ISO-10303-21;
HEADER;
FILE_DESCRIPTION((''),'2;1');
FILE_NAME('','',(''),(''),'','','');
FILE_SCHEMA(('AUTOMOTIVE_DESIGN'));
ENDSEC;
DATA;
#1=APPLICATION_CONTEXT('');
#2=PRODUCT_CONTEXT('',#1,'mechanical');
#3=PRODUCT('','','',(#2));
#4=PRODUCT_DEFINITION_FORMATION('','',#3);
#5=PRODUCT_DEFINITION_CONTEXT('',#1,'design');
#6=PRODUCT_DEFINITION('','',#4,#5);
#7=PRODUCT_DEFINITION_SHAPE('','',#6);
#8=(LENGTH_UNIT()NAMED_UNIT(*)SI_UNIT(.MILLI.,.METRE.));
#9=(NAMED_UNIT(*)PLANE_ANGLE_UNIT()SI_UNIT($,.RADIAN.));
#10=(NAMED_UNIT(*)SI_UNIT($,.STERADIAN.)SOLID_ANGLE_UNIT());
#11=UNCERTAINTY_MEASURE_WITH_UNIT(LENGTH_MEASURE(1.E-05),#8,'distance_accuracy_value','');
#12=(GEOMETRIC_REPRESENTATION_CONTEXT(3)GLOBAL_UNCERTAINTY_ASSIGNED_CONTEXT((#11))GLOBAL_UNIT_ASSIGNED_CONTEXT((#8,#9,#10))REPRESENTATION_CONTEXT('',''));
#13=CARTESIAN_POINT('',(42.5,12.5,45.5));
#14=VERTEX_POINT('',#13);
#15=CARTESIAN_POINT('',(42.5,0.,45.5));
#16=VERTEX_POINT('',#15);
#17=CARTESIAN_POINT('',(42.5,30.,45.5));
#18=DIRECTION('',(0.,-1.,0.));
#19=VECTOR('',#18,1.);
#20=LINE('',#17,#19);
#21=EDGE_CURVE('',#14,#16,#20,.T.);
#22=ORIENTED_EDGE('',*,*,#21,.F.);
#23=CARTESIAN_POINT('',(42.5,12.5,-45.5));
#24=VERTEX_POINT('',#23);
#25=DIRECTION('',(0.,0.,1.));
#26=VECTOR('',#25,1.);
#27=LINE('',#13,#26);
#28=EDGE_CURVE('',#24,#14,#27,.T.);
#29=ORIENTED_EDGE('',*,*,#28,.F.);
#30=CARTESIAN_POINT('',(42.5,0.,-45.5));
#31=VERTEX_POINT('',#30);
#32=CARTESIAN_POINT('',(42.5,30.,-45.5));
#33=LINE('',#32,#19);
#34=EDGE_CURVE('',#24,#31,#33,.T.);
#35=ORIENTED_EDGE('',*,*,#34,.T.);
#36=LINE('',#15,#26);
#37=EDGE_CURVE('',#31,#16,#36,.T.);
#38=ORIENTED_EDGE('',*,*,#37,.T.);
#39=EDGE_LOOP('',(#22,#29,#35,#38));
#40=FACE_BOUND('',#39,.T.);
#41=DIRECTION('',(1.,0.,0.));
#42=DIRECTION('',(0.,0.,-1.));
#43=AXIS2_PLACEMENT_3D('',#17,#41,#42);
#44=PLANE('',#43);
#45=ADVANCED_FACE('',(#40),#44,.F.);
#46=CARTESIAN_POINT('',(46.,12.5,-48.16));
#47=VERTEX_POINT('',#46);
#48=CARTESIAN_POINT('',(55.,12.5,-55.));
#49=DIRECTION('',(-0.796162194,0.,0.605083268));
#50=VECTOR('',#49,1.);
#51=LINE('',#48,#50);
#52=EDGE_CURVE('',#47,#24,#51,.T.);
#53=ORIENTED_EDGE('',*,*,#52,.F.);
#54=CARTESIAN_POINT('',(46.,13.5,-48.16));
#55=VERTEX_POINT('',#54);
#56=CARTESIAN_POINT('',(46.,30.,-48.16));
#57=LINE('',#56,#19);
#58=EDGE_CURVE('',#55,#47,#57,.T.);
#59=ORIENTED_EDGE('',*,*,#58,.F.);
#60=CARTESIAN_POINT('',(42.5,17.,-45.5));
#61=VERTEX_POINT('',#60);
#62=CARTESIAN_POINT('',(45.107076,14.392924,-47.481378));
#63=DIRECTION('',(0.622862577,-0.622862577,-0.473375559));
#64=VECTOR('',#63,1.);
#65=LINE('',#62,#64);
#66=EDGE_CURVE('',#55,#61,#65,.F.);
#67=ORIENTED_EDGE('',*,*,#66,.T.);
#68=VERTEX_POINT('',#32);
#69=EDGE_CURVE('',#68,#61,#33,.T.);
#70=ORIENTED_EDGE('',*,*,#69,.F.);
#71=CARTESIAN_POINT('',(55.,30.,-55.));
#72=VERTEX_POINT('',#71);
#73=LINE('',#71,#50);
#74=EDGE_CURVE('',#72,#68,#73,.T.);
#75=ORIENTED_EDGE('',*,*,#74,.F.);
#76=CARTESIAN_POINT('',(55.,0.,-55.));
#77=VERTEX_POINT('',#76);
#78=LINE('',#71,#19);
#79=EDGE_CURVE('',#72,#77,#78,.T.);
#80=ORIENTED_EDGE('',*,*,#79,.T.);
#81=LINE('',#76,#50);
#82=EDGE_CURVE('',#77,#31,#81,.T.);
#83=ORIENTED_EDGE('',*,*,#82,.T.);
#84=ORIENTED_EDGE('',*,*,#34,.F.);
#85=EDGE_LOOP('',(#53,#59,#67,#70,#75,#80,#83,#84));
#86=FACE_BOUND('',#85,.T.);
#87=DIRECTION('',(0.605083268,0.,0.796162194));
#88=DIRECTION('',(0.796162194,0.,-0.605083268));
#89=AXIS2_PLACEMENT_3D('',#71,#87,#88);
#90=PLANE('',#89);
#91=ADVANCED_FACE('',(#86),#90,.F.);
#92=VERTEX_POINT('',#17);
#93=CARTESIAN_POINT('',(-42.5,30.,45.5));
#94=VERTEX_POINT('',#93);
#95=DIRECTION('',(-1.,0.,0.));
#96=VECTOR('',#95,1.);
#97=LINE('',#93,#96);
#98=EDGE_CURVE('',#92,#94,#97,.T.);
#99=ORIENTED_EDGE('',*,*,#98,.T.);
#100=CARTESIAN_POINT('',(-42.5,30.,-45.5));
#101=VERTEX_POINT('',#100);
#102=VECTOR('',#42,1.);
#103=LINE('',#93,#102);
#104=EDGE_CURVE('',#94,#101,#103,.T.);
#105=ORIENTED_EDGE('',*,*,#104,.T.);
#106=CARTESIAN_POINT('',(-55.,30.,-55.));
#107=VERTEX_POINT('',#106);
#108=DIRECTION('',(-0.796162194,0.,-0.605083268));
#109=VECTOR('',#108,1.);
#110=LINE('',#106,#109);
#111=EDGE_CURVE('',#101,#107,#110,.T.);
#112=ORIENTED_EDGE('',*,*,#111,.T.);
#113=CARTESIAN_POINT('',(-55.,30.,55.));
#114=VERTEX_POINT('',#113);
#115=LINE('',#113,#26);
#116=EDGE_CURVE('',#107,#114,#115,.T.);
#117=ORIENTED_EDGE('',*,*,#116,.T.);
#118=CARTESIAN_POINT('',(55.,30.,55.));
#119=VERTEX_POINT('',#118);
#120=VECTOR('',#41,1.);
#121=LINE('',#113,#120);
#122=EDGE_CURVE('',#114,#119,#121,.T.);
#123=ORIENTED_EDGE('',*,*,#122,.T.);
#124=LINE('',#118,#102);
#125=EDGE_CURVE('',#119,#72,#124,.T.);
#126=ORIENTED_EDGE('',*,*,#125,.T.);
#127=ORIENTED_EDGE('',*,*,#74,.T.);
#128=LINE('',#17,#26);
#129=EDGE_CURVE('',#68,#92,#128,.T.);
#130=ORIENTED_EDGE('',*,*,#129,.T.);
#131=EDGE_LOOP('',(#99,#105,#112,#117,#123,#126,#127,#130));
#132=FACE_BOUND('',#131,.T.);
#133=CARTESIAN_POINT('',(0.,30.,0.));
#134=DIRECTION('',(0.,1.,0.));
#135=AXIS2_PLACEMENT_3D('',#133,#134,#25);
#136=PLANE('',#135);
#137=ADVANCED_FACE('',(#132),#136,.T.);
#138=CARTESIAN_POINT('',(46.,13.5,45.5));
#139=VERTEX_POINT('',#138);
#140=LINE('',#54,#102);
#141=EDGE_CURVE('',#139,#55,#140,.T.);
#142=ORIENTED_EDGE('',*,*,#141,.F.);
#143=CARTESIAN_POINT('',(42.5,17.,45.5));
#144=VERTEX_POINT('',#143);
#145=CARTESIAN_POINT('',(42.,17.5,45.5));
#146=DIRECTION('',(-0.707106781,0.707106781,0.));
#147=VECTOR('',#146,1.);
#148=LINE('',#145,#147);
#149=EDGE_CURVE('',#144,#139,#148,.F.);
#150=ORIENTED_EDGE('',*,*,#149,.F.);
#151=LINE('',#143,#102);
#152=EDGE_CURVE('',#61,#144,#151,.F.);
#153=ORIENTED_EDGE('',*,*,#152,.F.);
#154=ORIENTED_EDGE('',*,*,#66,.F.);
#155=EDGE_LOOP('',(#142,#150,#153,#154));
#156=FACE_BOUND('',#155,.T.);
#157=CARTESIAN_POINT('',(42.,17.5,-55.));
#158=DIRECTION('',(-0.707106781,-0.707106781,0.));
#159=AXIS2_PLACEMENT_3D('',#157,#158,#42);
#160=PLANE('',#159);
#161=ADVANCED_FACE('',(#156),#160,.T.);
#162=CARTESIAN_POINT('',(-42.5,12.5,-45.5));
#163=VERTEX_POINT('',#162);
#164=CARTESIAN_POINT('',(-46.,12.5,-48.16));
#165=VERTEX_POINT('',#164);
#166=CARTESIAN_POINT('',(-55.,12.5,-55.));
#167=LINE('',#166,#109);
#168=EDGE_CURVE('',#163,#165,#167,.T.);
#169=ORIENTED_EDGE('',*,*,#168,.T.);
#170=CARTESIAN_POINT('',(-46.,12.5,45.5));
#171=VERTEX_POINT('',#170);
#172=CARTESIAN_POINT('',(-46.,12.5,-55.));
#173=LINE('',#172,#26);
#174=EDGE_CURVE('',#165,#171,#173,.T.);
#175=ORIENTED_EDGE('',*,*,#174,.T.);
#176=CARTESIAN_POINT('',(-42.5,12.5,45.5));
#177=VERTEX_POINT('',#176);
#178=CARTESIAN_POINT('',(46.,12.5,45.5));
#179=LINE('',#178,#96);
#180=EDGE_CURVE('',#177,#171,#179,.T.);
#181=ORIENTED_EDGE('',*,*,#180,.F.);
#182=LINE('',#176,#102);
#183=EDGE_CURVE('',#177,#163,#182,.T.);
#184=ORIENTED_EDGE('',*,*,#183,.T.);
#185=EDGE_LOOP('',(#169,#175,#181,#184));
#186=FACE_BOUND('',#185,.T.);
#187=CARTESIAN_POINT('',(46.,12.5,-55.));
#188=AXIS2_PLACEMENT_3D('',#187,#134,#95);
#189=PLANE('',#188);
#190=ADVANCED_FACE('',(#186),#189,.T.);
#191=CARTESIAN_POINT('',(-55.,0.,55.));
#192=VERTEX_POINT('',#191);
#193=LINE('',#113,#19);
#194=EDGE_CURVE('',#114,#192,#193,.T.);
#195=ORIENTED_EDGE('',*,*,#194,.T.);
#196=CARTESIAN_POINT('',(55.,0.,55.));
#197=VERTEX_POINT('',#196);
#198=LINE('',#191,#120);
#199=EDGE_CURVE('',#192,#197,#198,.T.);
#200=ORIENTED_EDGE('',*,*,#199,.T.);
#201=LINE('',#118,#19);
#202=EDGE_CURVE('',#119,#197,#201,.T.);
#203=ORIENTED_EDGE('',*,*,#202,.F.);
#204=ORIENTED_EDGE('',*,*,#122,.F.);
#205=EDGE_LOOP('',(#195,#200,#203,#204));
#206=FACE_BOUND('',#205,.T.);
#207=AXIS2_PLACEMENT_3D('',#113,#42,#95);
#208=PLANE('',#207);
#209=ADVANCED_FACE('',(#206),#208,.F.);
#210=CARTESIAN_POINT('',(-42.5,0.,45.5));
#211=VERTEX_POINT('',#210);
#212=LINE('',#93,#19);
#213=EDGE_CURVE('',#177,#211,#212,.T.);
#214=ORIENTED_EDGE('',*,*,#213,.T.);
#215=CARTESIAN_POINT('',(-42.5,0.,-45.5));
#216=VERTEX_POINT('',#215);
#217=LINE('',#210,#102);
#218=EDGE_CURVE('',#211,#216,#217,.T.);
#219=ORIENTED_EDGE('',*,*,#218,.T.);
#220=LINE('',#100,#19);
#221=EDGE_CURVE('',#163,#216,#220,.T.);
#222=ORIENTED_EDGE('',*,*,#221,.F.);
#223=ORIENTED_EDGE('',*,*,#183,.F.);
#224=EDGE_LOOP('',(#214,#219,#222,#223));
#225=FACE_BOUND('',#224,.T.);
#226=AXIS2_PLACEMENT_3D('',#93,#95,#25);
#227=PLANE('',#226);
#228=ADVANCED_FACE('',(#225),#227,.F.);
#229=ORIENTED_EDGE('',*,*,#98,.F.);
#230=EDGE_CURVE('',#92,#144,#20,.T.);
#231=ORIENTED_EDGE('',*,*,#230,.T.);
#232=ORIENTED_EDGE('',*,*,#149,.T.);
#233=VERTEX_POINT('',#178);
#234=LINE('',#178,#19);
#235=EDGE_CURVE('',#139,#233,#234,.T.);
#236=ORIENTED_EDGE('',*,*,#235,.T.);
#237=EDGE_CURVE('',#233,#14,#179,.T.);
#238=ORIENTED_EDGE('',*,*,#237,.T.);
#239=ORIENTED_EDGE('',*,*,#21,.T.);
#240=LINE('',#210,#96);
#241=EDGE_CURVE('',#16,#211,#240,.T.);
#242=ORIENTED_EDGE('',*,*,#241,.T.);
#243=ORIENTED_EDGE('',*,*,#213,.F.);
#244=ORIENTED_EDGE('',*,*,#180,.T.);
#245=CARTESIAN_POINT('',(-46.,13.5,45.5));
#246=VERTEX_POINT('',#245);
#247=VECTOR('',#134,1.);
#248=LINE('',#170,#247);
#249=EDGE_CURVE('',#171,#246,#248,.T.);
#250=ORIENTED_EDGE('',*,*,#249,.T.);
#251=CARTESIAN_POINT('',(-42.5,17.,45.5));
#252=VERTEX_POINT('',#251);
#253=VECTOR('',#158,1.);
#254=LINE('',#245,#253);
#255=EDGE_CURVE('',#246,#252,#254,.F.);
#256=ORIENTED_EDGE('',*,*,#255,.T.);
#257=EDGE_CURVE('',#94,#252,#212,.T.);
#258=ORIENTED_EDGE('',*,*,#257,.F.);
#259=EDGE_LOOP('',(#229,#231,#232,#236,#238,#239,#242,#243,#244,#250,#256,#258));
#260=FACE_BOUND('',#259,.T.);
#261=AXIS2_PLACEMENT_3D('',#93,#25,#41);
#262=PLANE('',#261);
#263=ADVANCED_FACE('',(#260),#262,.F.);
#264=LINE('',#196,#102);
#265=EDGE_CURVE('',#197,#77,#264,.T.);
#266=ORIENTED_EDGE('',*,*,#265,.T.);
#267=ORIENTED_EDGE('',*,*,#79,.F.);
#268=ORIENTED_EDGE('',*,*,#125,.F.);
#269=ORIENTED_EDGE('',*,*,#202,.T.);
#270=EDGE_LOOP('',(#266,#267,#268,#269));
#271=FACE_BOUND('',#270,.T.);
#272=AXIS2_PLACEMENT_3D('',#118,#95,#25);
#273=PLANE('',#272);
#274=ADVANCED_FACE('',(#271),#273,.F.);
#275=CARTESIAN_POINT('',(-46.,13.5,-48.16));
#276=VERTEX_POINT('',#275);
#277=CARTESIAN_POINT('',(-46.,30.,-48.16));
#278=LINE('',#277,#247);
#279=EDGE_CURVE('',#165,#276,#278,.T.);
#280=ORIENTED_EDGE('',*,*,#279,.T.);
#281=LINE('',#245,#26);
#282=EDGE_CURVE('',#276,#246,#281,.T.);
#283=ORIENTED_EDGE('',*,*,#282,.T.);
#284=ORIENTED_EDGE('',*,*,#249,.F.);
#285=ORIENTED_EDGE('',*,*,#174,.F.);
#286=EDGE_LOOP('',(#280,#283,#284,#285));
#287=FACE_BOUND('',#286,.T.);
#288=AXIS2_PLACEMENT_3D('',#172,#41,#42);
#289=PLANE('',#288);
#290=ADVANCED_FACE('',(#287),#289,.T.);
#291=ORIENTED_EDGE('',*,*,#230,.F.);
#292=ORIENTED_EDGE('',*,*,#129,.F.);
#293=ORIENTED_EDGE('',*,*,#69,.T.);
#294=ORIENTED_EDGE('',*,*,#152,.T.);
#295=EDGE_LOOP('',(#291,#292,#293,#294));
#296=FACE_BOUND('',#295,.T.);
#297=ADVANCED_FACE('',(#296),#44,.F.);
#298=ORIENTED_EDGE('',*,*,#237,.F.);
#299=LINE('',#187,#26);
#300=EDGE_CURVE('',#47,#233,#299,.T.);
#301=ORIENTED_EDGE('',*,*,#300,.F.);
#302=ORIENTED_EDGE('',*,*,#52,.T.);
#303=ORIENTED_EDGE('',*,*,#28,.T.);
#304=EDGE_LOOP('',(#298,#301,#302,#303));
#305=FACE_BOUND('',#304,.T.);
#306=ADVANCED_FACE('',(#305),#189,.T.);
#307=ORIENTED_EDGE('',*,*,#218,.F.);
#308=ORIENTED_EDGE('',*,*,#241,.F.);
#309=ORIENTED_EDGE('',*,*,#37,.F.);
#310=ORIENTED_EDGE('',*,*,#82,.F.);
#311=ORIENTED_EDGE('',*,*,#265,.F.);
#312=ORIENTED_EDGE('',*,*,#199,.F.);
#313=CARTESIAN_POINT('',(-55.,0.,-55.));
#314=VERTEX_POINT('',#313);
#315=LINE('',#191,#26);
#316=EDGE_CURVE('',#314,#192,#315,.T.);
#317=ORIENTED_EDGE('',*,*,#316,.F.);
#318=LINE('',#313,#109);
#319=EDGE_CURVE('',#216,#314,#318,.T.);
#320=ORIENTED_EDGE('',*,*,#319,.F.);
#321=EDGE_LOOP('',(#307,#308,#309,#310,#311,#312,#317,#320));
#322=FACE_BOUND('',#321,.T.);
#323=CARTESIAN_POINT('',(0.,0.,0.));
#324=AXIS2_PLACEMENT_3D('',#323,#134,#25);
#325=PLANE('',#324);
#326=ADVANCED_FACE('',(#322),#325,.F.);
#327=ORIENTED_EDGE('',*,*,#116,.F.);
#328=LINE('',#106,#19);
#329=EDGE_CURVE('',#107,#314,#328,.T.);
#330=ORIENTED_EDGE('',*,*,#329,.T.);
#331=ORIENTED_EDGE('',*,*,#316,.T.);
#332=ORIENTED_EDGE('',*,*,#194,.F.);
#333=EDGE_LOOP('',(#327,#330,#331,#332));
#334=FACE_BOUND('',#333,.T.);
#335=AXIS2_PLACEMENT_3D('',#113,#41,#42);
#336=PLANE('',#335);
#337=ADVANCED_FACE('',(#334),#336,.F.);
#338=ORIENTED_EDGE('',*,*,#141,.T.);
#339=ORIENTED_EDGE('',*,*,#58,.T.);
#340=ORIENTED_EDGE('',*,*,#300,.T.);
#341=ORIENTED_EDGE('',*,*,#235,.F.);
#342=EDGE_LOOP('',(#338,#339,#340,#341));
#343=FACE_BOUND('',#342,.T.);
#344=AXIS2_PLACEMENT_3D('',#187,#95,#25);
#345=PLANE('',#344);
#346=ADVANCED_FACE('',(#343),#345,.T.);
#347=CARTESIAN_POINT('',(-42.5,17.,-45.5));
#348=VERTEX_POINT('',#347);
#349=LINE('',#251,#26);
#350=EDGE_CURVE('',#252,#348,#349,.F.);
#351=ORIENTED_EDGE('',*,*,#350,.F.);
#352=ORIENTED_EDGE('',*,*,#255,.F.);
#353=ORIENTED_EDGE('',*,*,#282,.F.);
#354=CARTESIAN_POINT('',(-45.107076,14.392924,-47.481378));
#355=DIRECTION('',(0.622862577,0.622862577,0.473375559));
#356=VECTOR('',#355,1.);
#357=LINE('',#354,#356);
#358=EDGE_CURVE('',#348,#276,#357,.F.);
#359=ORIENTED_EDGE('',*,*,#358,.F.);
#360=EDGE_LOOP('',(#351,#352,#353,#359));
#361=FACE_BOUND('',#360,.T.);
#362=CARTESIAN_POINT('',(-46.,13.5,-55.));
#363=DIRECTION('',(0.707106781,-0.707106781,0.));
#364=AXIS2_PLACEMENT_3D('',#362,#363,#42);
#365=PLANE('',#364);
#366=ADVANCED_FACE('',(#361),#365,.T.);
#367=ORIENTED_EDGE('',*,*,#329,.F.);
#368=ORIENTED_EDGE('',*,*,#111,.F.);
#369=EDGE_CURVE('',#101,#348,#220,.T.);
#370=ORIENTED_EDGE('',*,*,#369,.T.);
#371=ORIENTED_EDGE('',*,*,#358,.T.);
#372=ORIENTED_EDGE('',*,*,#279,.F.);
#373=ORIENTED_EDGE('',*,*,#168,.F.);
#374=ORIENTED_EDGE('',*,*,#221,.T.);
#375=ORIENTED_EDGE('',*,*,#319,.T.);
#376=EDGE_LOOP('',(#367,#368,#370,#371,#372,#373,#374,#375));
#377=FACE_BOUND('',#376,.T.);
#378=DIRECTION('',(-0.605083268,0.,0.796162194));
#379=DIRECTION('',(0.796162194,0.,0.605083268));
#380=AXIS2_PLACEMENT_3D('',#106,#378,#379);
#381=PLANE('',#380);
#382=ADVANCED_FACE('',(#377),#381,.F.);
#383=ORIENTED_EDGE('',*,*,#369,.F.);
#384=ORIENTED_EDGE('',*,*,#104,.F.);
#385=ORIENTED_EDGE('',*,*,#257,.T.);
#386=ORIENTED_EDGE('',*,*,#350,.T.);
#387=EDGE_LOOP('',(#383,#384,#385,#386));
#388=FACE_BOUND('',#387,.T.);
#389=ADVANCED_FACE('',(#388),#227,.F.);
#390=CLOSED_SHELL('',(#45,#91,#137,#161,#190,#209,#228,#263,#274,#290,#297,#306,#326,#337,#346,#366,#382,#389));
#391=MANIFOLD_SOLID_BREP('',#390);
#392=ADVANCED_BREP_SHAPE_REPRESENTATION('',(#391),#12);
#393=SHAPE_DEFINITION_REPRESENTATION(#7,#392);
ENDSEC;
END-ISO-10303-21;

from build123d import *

# Parameters (mm, degrees)
BOSS_EXTRUDE1_DEPTH = 30
SKETCH2_W           = 92
SKETCH2_H           = 5
CUT_EXTRUDE1_DEPTH  = 119.428248319
CHAMFER1_SIZE       = 4


with BuildPart() as part:
    # Sketch1 → Boss-Extrude1 (new body)
    with BuildSketch(Plane(origin=(0, 0, 0), x_dir=(1, 0, 0), z_dir=(0, 1, 0))):
        Polygon((-55, 55), (-42.5, 45.5), (-42.5, -45.5), (42.5, -45.5), (42.5, 45.5), (55, 55), (55, -55), (-55, -55), align=None)
    extrude(amount=BOSS_EXTRUDE1_DEPTH)

    # Sketch2 → Cut-Extrude1 (cut, through all)
    with BuildSketch(Plane(origin=(0, 0, 45.5), x_dir=(-1, 0, 0), z_dir=(0, 0, -1))):
        with Locations((0, 15)):
            Rectangle(SKETCH2_W, SKETCH2_H)
    extrude(amount=CUT_EXTRUDE1_DEPTH, mode=Mode.SUBTRACT)

    # Chamfer1
    # the kernel refuses this chamfer: 4 mm, written as the material it adds along each edge
    with BuildSketch(Plane(origin=(-46, 17.5, 55.786731952), x_dir=(-0.027495876610585623, -0.9996219169112968, 0), z_dir=(0, 0, -1))) as chamfer1_piece_1_section:
        Polygon((CHAMFER1_SIZE * 0.999621916911, -CHAMFER1_SIZE * 0.0274958766106), (-CHAMFER1_SIZE * 0.0274958766106, -CHAMFER1_SIZE * 0.999621916911), (0, 0), align=None)
    chamfer1_piece_1 = extrude(amount=114.233463904, mode=Mode.PRIVATE)
    chamfer1_piece_1 = split(chamfer1_piece_1, bisect_by=Plane(origin=(-22.386376136, 16.144806412, -30.213645864), z_dir=(-0.6050832675335592, 0, 0.7961621941231015)), keep=Keep.TOP, mode=Mode.PRIVATE)
    chamfer1_piece_1 = split(chamfer1_piece_1, bisect_by=Plane(origin=(-42.5, 16.144806412, -0.839947127), z_dir=(-1, 0, 0)), keep=Keep.TOP, mode=Mode.PRIVATE)
    chamfer1_piece_1 = split(chamfer1_piece_1, bisect_by=Plane(origin=(-44.710387176, 16.144806412, 55), z_dir=(0, 0, -1)), keep=Keep.TOP, mode=Mode.PRIVATE)
    add(chamfer1_piece_1)
    with BuildSketch(Plane(origin=(46, 17.5, 55.786731952), x_dir=(-0.9996219169112968, 0.02749587661058651, 0), z_dir=(0, 0, -1))) as chamfer1_piece_2_section:
        Polygon((CHAMFER1_SIZE * 0.999621916911, -CHAMFER1_SIZE * 0.0274958766106), (-CHAMFER1_SIZE * 0.0274958766106, -CHAMFER1_SIZE * 0.999621916911), (0, 0), align=None)
    chamfer1_piece_2 = extrude(amount=114.233463904, mode=Mode.PRIVATE)
    chamfer1_piece_2 = split(chamfer1_piece_2, bisect_by=Plane(origin=(22.386376136, 16.144806412, -30.213645864), z_dir=(0.6050832675335583, 0, 0.7961621941231022)), keep=Keep.TOP, mode=Mode.PRIVATE)
    chamfer1_piece_2 = split(chamfer1_piece_2, bisect_by=Plane(origin=(44.710387176, 16.144806412, 55), z_dir=(0, 0, -1)), keep=Keep.TOP, mode=Mode.PRIVATE)
    chamfer1_piece_2 = split(chamfer1_piece_2, bisect_by=Plane(origin=(42.5, 16.144806412, -0.839947127), z_dir=(1, 0, 0)), keep=Keep.TOP, mode=Mode.PRIVATE)
    add(chamfer1_piece_2)


solid = part.part
